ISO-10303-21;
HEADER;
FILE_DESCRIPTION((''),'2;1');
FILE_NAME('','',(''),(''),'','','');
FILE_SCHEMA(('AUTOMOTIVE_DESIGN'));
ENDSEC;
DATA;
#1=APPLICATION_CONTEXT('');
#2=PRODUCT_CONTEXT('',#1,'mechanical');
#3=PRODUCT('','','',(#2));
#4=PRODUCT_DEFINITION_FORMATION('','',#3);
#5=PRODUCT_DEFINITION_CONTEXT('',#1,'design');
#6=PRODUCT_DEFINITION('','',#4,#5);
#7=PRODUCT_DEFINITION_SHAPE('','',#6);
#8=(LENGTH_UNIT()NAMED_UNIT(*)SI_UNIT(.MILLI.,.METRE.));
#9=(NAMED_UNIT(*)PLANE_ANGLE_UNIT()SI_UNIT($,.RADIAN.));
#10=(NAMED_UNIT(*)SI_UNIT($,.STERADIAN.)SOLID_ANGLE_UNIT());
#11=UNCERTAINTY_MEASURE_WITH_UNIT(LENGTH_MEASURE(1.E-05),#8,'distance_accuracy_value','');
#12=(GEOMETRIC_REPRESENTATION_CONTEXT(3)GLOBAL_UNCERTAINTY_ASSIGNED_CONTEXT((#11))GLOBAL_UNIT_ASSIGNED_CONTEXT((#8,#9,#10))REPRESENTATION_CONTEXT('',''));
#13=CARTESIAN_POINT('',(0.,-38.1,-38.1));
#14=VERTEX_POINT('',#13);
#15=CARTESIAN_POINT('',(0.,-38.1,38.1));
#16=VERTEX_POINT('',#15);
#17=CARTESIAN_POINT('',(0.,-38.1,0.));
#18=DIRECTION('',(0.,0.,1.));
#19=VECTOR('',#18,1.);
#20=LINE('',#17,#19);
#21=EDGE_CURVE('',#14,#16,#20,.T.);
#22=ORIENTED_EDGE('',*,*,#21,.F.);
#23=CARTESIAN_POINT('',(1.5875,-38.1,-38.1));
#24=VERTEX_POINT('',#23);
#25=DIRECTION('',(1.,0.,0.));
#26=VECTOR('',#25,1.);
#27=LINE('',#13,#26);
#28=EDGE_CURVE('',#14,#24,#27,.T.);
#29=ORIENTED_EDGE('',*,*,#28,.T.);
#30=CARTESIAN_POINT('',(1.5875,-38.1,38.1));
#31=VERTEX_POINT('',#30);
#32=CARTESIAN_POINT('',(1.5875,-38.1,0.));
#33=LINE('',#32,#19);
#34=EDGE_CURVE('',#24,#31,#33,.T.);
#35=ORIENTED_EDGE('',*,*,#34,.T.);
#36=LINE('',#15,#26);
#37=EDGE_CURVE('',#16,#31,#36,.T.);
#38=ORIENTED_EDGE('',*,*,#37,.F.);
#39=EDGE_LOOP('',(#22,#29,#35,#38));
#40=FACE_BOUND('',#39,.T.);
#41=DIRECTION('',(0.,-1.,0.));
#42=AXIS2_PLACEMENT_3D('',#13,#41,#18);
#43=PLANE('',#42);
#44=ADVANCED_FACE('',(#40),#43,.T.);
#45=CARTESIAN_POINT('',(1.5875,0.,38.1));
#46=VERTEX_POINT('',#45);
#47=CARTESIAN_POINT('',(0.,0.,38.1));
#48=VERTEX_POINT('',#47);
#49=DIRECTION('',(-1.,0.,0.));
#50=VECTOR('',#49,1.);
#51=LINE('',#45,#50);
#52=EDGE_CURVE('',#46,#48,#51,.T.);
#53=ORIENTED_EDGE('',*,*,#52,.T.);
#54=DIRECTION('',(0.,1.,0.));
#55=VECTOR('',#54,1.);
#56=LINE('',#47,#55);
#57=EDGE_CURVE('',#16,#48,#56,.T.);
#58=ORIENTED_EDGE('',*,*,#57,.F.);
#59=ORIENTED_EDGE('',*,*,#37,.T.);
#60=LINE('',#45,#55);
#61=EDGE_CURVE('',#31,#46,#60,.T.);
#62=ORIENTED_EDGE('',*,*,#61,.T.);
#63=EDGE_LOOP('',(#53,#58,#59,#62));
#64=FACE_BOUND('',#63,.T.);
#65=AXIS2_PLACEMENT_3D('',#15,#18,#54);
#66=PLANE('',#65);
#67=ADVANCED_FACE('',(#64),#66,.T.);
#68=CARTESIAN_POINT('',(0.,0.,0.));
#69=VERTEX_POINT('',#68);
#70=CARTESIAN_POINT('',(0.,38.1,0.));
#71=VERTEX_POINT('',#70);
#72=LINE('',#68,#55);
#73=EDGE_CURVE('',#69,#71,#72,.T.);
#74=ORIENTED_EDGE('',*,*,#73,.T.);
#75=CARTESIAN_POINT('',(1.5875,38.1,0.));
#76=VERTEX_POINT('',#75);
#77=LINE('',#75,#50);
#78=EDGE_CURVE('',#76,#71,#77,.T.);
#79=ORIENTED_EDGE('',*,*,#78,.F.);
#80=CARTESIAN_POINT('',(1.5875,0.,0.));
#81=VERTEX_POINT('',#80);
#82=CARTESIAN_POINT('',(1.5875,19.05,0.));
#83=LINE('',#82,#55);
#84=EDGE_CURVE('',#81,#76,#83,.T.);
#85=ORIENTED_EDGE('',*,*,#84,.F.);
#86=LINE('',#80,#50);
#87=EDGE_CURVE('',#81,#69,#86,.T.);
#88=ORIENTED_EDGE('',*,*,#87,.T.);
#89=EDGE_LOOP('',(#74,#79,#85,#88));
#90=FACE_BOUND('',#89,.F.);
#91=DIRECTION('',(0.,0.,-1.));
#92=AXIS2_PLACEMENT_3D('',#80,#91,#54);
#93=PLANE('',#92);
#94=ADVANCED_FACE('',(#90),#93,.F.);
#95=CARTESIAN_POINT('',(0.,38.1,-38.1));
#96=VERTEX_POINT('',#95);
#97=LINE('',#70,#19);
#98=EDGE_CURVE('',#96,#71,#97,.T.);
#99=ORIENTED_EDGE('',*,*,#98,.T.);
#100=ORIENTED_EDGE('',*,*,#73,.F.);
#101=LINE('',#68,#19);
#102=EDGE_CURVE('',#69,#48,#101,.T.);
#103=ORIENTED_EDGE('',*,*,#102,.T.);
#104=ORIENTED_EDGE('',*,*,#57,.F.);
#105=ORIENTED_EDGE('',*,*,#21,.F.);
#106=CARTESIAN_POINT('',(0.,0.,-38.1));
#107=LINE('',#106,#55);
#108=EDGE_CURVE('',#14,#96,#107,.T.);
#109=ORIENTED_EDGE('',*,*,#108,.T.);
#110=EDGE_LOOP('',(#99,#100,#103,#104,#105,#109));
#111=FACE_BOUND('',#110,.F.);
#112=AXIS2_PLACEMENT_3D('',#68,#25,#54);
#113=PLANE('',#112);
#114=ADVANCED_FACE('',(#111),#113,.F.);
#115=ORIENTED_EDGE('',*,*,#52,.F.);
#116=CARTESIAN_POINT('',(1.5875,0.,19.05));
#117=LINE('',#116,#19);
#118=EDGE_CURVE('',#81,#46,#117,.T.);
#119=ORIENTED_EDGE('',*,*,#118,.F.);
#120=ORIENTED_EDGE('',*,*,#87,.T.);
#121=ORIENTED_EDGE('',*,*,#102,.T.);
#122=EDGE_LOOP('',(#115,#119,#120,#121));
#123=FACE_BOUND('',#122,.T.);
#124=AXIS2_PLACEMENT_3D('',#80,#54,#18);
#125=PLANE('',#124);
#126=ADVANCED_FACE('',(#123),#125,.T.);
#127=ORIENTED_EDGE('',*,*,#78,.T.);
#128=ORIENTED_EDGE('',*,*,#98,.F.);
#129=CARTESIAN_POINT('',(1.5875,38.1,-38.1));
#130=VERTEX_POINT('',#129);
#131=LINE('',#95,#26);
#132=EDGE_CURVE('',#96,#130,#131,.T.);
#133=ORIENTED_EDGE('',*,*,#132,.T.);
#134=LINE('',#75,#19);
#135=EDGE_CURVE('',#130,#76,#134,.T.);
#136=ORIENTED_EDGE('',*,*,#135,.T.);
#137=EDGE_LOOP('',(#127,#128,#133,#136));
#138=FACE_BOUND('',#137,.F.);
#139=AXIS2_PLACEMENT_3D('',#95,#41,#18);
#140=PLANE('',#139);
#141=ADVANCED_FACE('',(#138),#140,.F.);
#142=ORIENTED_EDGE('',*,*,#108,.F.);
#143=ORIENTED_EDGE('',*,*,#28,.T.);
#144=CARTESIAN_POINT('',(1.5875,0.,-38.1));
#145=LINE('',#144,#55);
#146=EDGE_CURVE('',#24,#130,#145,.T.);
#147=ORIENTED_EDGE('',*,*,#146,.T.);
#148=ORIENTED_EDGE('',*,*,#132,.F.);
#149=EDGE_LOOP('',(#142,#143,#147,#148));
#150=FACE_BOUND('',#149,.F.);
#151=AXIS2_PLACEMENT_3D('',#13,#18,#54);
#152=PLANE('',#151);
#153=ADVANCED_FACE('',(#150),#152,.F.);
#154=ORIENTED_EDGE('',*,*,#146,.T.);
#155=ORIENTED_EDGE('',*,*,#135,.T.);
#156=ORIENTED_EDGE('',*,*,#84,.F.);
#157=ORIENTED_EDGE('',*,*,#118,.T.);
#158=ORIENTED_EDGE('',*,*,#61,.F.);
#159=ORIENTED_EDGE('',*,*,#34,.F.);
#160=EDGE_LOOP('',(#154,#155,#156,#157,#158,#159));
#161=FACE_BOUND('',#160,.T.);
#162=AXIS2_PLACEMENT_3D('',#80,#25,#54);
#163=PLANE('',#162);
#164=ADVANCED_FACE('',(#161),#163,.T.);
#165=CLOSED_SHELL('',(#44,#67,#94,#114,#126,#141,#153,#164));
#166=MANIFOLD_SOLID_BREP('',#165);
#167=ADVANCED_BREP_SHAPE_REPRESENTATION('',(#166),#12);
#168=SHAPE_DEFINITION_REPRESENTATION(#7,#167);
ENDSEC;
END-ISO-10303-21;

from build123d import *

# Parameters (mm, degrees)
F0_W     = 76.2
F0_H     = 76.2
F1_DEPTH = 1.5875
F2_W     = 38.1
F2_H     = 38.1
F3_DEPTH = 25.4


# Not quite as in the source:
# - a length typed as a fraction of an inch, garbled in the dataset ("3 / 203.2 mm" for 3/8 in), is restored


with BuildPart() as f1:
    # F0 (on Right) → F1 (new body)
    with BuildSketch(Plane.YZ):
        Rectangle(F0_W, F0_H)
    extrude(amount=F1_DEPTH)

    # F2 (on face) → F3 (cut)
    with BuildSketch(Plane.YZ.offset(1.5875)):
        with Locations((19.05, 19.05)):
            Rectangle(F2_W, F2_H)
    extrude(amount=-F3_DEPTH, mode=Mode.SUBTRACT)


solid = f1.part
